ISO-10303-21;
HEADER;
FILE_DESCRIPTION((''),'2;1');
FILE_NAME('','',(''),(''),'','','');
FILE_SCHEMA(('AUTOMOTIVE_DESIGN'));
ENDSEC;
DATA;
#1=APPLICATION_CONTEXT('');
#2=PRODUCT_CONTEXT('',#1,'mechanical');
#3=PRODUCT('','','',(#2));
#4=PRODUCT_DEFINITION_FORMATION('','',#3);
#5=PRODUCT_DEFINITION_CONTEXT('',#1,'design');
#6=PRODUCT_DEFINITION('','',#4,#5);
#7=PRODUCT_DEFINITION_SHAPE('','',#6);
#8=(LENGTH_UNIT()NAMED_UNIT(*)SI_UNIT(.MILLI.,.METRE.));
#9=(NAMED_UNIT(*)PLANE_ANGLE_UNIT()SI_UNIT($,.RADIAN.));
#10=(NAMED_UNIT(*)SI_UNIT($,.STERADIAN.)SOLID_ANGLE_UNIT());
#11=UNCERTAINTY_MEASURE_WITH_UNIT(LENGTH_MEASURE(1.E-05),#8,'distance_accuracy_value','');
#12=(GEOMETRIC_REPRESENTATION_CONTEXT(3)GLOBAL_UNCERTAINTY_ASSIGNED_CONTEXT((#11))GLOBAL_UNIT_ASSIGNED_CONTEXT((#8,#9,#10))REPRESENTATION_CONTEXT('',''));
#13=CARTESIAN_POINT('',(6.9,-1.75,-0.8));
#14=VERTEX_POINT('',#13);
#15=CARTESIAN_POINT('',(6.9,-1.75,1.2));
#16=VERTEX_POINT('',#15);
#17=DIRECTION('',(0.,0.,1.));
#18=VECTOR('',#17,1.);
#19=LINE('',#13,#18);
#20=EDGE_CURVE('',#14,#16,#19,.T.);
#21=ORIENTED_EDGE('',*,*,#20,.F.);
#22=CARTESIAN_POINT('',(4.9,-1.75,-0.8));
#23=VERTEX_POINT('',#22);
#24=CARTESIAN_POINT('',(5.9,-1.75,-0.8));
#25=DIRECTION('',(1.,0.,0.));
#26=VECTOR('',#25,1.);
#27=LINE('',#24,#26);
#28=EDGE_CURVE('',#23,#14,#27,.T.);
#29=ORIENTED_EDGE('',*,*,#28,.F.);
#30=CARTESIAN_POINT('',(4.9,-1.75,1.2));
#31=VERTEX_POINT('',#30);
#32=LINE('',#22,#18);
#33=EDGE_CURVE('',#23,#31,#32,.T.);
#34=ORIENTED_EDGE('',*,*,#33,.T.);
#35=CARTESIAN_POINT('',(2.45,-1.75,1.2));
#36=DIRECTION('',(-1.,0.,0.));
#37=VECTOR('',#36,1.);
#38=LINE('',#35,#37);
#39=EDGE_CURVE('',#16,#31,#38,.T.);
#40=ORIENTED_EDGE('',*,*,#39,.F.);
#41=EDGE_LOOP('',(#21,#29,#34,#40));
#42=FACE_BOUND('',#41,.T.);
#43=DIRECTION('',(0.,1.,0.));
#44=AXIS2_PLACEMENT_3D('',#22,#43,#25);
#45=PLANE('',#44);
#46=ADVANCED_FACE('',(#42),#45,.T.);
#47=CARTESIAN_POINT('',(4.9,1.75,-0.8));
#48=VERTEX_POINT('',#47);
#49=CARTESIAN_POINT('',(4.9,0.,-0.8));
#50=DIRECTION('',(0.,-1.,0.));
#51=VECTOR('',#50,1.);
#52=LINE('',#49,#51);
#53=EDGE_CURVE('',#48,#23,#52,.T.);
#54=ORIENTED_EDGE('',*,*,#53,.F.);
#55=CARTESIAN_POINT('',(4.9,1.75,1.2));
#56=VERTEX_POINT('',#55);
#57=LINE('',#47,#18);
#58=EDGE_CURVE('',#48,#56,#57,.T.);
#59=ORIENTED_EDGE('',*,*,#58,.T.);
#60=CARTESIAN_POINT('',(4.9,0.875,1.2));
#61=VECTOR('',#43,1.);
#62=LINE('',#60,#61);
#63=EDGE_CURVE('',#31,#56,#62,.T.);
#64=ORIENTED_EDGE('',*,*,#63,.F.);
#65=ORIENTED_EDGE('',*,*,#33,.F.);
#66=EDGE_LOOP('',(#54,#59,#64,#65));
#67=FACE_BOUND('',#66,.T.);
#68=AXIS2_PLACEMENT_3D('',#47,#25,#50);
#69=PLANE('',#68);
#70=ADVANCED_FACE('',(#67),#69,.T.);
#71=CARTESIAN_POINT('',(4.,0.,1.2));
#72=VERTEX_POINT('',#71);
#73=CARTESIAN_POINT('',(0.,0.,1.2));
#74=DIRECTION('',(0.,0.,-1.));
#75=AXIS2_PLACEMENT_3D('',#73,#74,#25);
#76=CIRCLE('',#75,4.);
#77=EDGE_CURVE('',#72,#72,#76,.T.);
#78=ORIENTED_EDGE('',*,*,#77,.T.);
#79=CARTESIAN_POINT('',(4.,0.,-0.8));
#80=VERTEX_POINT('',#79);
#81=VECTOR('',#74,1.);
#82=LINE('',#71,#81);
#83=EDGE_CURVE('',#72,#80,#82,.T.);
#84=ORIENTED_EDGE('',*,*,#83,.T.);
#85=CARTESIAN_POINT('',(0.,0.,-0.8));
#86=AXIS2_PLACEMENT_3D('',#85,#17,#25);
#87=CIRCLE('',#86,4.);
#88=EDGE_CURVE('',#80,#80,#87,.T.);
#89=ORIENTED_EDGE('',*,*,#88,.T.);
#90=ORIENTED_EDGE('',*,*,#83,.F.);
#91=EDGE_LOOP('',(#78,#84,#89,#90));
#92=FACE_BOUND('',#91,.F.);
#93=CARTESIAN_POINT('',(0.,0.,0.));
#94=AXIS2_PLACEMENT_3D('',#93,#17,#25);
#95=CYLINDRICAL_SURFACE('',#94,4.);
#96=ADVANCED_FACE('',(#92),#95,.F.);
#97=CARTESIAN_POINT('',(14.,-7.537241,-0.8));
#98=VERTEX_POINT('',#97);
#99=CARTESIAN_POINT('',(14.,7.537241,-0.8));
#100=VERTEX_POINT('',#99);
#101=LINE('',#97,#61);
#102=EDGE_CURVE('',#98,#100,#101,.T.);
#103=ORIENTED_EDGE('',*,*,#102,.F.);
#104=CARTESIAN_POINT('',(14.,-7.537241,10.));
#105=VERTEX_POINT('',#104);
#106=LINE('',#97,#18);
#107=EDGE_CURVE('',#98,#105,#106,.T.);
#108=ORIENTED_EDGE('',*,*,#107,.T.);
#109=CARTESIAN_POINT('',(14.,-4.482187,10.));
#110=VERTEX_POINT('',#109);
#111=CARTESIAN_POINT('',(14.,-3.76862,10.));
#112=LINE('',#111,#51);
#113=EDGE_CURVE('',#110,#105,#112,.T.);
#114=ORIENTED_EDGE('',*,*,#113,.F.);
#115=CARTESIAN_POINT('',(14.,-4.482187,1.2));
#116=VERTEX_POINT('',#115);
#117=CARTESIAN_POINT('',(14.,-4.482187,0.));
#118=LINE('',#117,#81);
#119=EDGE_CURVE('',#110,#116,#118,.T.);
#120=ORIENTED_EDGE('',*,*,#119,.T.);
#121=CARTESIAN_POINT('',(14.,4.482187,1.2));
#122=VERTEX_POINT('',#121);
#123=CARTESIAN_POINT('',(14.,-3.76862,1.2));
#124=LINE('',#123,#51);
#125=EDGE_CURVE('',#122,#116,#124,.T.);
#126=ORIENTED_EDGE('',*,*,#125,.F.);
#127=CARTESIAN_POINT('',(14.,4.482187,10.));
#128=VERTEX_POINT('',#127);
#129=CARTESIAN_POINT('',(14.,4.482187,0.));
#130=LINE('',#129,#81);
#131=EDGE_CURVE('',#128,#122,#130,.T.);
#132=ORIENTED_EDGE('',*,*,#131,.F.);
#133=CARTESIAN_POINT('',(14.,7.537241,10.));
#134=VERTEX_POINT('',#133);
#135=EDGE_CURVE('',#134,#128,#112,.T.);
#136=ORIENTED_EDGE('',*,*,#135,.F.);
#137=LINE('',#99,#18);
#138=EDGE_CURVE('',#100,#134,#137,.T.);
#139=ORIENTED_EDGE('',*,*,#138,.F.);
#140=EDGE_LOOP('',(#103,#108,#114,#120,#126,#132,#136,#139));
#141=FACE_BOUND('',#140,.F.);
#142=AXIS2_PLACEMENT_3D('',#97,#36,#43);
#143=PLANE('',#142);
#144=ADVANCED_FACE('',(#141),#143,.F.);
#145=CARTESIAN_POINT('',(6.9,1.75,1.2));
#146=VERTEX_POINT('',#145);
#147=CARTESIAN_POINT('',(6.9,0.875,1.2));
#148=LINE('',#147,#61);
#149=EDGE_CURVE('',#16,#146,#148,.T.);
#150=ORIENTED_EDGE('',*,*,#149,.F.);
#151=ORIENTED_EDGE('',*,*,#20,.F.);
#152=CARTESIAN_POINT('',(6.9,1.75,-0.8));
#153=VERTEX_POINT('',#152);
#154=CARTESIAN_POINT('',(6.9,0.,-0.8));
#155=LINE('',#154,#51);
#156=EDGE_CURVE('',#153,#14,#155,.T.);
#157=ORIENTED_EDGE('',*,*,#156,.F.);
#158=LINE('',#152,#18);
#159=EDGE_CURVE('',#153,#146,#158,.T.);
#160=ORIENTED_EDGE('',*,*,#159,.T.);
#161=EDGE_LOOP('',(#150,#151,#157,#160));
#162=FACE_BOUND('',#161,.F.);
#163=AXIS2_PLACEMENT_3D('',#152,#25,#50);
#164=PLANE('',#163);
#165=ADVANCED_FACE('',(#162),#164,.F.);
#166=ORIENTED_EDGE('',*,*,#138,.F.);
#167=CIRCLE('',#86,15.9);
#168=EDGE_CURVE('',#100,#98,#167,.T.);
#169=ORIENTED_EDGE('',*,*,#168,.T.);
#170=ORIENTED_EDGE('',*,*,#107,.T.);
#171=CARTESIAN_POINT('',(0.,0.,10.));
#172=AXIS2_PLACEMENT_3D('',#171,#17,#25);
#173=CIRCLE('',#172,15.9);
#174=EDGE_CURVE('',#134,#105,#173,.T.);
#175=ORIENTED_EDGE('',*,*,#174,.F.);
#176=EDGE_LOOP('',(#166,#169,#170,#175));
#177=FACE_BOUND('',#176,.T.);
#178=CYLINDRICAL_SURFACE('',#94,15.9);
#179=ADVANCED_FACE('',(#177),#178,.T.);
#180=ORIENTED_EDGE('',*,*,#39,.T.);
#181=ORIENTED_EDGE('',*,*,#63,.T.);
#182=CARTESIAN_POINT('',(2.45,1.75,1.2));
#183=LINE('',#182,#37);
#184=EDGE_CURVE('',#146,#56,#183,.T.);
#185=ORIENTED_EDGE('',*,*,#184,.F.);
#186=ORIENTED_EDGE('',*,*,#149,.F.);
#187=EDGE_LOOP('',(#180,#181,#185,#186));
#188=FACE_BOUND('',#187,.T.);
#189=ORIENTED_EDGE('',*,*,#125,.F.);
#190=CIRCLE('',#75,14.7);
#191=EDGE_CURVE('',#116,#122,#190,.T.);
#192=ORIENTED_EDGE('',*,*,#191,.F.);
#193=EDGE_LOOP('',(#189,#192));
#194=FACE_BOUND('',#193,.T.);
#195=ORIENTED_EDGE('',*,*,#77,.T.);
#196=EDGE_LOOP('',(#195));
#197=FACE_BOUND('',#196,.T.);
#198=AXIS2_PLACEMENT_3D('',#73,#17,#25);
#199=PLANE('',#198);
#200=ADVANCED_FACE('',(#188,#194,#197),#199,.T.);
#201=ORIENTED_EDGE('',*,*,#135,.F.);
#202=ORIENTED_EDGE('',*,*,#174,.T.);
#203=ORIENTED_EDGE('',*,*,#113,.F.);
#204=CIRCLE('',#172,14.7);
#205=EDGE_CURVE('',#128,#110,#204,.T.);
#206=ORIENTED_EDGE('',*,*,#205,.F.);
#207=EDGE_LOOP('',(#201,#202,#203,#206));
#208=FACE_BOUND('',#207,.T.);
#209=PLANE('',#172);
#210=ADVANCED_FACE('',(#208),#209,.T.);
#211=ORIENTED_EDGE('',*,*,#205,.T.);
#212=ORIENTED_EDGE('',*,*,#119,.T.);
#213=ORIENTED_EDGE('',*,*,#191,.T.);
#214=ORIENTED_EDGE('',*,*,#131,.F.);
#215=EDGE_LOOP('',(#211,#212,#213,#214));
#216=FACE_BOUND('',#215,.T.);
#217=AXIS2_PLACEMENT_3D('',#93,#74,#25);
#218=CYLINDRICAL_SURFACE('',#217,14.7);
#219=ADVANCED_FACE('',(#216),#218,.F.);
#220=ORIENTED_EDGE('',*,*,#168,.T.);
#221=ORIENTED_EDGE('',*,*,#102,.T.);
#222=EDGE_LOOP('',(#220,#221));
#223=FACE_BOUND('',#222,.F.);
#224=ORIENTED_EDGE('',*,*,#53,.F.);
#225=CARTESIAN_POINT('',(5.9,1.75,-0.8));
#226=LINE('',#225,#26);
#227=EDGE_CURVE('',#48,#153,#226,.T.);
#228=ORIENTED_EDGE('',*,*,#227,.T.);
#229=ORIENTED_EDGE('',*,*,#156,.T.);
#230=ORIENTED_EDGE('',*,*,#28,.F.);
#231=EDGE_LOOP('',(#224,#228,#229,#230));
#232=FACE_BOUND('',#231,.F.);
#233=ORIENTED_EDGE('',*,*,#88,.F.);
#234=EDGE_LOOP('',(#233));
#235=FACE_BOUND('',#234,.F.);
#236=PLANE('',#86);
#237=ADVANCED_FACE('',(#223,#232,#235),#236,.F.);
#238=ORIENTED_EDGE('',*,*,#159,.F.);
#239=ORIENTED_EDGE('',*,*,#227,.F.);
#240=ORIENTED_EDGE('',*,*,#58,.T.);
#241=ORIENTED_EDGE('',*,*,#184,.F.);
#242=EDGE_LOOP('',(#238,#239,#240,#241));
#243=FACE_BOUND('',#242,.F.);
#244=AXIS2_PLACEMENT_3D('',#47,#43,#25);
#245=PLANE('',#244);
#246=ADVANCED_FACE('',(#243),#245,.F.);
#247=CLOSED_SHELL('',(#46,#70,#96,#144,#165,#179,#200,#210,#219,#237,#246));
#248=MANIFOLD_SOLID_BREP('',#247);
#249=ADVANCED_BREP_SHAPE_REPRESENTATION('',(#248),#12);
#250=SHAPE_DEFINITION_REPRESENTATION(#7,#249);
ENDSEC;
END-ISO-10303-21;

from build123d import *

# Parameters (mm, degrees)
F0_R     = 15.9
F0_R_2   = 4
F1_DEPTH = 10
F2_T     = -1.2
F3_DEPTH = 10.001
F4_DEPTH = 0.8
F5_W     = 2
F5_H     = 3.5
F6_DEPTH = 10.801


# Not quite as in the source:
# - a feature names something its author has since deleted; it is built from what else it names


with BuildPart() as f1:
    # F0 (on Top) → F1 (new body)
    with BuildSketch(Plane.XY):
        Circle(F0_R)
        Circle(F0_R_2, mode=Mode.SUBTRACT)
        Circle(F0_R_2)
    extrude(amount=F1_DEPTH)

    # F2
    f2_openings = [f1.faces().sort_by_distance(p)[0] for p in [
        (0, 0, 10),
    ]]
    offset(amount=F2_T, openings=f2_openings)

    # F0 (on Top) → F3 (cut, through all)
    with BuildSketch(Plane.XY):
        Circle(F0_R_2)
    extrude(amount=F3_DEPTH, mode=Mode.SUBTRACT)

    # F0 (on Top) → F4 (join)
    with BuildSketch(Plane.XY):
        Circle(F0_R)
        Circle(F0_R_2, mode=Mode.SUBTRACT)
    extrude(amount=-F4_DEPTH)

    # F5 (on face) → F6 (cut, through all)
    with BuildSketch(Plane(origin=(0, 0, -0.8), x_dir=(1, 0, 0), z_dir=(0, 0, -1))):
        with Locations((5.9, 0)):
            Rectangle(F5_W, F5_H)
        with BuildLine():
            ThreePointArc((15.9, 0), (15.4176846511, 3.8865151486), (14, 7.5372408745))
            Line((14, 7.5372408745), (14, -7.5372408745))
            ThreePointArc((14, -7.5372408745), (15.4176846511, -3.8865151486), (15.9, 0))
        make_face()
    extrude(amount=-F6_DEPTH, mode=Mode.SUBTRACT)


solid = f1.part
